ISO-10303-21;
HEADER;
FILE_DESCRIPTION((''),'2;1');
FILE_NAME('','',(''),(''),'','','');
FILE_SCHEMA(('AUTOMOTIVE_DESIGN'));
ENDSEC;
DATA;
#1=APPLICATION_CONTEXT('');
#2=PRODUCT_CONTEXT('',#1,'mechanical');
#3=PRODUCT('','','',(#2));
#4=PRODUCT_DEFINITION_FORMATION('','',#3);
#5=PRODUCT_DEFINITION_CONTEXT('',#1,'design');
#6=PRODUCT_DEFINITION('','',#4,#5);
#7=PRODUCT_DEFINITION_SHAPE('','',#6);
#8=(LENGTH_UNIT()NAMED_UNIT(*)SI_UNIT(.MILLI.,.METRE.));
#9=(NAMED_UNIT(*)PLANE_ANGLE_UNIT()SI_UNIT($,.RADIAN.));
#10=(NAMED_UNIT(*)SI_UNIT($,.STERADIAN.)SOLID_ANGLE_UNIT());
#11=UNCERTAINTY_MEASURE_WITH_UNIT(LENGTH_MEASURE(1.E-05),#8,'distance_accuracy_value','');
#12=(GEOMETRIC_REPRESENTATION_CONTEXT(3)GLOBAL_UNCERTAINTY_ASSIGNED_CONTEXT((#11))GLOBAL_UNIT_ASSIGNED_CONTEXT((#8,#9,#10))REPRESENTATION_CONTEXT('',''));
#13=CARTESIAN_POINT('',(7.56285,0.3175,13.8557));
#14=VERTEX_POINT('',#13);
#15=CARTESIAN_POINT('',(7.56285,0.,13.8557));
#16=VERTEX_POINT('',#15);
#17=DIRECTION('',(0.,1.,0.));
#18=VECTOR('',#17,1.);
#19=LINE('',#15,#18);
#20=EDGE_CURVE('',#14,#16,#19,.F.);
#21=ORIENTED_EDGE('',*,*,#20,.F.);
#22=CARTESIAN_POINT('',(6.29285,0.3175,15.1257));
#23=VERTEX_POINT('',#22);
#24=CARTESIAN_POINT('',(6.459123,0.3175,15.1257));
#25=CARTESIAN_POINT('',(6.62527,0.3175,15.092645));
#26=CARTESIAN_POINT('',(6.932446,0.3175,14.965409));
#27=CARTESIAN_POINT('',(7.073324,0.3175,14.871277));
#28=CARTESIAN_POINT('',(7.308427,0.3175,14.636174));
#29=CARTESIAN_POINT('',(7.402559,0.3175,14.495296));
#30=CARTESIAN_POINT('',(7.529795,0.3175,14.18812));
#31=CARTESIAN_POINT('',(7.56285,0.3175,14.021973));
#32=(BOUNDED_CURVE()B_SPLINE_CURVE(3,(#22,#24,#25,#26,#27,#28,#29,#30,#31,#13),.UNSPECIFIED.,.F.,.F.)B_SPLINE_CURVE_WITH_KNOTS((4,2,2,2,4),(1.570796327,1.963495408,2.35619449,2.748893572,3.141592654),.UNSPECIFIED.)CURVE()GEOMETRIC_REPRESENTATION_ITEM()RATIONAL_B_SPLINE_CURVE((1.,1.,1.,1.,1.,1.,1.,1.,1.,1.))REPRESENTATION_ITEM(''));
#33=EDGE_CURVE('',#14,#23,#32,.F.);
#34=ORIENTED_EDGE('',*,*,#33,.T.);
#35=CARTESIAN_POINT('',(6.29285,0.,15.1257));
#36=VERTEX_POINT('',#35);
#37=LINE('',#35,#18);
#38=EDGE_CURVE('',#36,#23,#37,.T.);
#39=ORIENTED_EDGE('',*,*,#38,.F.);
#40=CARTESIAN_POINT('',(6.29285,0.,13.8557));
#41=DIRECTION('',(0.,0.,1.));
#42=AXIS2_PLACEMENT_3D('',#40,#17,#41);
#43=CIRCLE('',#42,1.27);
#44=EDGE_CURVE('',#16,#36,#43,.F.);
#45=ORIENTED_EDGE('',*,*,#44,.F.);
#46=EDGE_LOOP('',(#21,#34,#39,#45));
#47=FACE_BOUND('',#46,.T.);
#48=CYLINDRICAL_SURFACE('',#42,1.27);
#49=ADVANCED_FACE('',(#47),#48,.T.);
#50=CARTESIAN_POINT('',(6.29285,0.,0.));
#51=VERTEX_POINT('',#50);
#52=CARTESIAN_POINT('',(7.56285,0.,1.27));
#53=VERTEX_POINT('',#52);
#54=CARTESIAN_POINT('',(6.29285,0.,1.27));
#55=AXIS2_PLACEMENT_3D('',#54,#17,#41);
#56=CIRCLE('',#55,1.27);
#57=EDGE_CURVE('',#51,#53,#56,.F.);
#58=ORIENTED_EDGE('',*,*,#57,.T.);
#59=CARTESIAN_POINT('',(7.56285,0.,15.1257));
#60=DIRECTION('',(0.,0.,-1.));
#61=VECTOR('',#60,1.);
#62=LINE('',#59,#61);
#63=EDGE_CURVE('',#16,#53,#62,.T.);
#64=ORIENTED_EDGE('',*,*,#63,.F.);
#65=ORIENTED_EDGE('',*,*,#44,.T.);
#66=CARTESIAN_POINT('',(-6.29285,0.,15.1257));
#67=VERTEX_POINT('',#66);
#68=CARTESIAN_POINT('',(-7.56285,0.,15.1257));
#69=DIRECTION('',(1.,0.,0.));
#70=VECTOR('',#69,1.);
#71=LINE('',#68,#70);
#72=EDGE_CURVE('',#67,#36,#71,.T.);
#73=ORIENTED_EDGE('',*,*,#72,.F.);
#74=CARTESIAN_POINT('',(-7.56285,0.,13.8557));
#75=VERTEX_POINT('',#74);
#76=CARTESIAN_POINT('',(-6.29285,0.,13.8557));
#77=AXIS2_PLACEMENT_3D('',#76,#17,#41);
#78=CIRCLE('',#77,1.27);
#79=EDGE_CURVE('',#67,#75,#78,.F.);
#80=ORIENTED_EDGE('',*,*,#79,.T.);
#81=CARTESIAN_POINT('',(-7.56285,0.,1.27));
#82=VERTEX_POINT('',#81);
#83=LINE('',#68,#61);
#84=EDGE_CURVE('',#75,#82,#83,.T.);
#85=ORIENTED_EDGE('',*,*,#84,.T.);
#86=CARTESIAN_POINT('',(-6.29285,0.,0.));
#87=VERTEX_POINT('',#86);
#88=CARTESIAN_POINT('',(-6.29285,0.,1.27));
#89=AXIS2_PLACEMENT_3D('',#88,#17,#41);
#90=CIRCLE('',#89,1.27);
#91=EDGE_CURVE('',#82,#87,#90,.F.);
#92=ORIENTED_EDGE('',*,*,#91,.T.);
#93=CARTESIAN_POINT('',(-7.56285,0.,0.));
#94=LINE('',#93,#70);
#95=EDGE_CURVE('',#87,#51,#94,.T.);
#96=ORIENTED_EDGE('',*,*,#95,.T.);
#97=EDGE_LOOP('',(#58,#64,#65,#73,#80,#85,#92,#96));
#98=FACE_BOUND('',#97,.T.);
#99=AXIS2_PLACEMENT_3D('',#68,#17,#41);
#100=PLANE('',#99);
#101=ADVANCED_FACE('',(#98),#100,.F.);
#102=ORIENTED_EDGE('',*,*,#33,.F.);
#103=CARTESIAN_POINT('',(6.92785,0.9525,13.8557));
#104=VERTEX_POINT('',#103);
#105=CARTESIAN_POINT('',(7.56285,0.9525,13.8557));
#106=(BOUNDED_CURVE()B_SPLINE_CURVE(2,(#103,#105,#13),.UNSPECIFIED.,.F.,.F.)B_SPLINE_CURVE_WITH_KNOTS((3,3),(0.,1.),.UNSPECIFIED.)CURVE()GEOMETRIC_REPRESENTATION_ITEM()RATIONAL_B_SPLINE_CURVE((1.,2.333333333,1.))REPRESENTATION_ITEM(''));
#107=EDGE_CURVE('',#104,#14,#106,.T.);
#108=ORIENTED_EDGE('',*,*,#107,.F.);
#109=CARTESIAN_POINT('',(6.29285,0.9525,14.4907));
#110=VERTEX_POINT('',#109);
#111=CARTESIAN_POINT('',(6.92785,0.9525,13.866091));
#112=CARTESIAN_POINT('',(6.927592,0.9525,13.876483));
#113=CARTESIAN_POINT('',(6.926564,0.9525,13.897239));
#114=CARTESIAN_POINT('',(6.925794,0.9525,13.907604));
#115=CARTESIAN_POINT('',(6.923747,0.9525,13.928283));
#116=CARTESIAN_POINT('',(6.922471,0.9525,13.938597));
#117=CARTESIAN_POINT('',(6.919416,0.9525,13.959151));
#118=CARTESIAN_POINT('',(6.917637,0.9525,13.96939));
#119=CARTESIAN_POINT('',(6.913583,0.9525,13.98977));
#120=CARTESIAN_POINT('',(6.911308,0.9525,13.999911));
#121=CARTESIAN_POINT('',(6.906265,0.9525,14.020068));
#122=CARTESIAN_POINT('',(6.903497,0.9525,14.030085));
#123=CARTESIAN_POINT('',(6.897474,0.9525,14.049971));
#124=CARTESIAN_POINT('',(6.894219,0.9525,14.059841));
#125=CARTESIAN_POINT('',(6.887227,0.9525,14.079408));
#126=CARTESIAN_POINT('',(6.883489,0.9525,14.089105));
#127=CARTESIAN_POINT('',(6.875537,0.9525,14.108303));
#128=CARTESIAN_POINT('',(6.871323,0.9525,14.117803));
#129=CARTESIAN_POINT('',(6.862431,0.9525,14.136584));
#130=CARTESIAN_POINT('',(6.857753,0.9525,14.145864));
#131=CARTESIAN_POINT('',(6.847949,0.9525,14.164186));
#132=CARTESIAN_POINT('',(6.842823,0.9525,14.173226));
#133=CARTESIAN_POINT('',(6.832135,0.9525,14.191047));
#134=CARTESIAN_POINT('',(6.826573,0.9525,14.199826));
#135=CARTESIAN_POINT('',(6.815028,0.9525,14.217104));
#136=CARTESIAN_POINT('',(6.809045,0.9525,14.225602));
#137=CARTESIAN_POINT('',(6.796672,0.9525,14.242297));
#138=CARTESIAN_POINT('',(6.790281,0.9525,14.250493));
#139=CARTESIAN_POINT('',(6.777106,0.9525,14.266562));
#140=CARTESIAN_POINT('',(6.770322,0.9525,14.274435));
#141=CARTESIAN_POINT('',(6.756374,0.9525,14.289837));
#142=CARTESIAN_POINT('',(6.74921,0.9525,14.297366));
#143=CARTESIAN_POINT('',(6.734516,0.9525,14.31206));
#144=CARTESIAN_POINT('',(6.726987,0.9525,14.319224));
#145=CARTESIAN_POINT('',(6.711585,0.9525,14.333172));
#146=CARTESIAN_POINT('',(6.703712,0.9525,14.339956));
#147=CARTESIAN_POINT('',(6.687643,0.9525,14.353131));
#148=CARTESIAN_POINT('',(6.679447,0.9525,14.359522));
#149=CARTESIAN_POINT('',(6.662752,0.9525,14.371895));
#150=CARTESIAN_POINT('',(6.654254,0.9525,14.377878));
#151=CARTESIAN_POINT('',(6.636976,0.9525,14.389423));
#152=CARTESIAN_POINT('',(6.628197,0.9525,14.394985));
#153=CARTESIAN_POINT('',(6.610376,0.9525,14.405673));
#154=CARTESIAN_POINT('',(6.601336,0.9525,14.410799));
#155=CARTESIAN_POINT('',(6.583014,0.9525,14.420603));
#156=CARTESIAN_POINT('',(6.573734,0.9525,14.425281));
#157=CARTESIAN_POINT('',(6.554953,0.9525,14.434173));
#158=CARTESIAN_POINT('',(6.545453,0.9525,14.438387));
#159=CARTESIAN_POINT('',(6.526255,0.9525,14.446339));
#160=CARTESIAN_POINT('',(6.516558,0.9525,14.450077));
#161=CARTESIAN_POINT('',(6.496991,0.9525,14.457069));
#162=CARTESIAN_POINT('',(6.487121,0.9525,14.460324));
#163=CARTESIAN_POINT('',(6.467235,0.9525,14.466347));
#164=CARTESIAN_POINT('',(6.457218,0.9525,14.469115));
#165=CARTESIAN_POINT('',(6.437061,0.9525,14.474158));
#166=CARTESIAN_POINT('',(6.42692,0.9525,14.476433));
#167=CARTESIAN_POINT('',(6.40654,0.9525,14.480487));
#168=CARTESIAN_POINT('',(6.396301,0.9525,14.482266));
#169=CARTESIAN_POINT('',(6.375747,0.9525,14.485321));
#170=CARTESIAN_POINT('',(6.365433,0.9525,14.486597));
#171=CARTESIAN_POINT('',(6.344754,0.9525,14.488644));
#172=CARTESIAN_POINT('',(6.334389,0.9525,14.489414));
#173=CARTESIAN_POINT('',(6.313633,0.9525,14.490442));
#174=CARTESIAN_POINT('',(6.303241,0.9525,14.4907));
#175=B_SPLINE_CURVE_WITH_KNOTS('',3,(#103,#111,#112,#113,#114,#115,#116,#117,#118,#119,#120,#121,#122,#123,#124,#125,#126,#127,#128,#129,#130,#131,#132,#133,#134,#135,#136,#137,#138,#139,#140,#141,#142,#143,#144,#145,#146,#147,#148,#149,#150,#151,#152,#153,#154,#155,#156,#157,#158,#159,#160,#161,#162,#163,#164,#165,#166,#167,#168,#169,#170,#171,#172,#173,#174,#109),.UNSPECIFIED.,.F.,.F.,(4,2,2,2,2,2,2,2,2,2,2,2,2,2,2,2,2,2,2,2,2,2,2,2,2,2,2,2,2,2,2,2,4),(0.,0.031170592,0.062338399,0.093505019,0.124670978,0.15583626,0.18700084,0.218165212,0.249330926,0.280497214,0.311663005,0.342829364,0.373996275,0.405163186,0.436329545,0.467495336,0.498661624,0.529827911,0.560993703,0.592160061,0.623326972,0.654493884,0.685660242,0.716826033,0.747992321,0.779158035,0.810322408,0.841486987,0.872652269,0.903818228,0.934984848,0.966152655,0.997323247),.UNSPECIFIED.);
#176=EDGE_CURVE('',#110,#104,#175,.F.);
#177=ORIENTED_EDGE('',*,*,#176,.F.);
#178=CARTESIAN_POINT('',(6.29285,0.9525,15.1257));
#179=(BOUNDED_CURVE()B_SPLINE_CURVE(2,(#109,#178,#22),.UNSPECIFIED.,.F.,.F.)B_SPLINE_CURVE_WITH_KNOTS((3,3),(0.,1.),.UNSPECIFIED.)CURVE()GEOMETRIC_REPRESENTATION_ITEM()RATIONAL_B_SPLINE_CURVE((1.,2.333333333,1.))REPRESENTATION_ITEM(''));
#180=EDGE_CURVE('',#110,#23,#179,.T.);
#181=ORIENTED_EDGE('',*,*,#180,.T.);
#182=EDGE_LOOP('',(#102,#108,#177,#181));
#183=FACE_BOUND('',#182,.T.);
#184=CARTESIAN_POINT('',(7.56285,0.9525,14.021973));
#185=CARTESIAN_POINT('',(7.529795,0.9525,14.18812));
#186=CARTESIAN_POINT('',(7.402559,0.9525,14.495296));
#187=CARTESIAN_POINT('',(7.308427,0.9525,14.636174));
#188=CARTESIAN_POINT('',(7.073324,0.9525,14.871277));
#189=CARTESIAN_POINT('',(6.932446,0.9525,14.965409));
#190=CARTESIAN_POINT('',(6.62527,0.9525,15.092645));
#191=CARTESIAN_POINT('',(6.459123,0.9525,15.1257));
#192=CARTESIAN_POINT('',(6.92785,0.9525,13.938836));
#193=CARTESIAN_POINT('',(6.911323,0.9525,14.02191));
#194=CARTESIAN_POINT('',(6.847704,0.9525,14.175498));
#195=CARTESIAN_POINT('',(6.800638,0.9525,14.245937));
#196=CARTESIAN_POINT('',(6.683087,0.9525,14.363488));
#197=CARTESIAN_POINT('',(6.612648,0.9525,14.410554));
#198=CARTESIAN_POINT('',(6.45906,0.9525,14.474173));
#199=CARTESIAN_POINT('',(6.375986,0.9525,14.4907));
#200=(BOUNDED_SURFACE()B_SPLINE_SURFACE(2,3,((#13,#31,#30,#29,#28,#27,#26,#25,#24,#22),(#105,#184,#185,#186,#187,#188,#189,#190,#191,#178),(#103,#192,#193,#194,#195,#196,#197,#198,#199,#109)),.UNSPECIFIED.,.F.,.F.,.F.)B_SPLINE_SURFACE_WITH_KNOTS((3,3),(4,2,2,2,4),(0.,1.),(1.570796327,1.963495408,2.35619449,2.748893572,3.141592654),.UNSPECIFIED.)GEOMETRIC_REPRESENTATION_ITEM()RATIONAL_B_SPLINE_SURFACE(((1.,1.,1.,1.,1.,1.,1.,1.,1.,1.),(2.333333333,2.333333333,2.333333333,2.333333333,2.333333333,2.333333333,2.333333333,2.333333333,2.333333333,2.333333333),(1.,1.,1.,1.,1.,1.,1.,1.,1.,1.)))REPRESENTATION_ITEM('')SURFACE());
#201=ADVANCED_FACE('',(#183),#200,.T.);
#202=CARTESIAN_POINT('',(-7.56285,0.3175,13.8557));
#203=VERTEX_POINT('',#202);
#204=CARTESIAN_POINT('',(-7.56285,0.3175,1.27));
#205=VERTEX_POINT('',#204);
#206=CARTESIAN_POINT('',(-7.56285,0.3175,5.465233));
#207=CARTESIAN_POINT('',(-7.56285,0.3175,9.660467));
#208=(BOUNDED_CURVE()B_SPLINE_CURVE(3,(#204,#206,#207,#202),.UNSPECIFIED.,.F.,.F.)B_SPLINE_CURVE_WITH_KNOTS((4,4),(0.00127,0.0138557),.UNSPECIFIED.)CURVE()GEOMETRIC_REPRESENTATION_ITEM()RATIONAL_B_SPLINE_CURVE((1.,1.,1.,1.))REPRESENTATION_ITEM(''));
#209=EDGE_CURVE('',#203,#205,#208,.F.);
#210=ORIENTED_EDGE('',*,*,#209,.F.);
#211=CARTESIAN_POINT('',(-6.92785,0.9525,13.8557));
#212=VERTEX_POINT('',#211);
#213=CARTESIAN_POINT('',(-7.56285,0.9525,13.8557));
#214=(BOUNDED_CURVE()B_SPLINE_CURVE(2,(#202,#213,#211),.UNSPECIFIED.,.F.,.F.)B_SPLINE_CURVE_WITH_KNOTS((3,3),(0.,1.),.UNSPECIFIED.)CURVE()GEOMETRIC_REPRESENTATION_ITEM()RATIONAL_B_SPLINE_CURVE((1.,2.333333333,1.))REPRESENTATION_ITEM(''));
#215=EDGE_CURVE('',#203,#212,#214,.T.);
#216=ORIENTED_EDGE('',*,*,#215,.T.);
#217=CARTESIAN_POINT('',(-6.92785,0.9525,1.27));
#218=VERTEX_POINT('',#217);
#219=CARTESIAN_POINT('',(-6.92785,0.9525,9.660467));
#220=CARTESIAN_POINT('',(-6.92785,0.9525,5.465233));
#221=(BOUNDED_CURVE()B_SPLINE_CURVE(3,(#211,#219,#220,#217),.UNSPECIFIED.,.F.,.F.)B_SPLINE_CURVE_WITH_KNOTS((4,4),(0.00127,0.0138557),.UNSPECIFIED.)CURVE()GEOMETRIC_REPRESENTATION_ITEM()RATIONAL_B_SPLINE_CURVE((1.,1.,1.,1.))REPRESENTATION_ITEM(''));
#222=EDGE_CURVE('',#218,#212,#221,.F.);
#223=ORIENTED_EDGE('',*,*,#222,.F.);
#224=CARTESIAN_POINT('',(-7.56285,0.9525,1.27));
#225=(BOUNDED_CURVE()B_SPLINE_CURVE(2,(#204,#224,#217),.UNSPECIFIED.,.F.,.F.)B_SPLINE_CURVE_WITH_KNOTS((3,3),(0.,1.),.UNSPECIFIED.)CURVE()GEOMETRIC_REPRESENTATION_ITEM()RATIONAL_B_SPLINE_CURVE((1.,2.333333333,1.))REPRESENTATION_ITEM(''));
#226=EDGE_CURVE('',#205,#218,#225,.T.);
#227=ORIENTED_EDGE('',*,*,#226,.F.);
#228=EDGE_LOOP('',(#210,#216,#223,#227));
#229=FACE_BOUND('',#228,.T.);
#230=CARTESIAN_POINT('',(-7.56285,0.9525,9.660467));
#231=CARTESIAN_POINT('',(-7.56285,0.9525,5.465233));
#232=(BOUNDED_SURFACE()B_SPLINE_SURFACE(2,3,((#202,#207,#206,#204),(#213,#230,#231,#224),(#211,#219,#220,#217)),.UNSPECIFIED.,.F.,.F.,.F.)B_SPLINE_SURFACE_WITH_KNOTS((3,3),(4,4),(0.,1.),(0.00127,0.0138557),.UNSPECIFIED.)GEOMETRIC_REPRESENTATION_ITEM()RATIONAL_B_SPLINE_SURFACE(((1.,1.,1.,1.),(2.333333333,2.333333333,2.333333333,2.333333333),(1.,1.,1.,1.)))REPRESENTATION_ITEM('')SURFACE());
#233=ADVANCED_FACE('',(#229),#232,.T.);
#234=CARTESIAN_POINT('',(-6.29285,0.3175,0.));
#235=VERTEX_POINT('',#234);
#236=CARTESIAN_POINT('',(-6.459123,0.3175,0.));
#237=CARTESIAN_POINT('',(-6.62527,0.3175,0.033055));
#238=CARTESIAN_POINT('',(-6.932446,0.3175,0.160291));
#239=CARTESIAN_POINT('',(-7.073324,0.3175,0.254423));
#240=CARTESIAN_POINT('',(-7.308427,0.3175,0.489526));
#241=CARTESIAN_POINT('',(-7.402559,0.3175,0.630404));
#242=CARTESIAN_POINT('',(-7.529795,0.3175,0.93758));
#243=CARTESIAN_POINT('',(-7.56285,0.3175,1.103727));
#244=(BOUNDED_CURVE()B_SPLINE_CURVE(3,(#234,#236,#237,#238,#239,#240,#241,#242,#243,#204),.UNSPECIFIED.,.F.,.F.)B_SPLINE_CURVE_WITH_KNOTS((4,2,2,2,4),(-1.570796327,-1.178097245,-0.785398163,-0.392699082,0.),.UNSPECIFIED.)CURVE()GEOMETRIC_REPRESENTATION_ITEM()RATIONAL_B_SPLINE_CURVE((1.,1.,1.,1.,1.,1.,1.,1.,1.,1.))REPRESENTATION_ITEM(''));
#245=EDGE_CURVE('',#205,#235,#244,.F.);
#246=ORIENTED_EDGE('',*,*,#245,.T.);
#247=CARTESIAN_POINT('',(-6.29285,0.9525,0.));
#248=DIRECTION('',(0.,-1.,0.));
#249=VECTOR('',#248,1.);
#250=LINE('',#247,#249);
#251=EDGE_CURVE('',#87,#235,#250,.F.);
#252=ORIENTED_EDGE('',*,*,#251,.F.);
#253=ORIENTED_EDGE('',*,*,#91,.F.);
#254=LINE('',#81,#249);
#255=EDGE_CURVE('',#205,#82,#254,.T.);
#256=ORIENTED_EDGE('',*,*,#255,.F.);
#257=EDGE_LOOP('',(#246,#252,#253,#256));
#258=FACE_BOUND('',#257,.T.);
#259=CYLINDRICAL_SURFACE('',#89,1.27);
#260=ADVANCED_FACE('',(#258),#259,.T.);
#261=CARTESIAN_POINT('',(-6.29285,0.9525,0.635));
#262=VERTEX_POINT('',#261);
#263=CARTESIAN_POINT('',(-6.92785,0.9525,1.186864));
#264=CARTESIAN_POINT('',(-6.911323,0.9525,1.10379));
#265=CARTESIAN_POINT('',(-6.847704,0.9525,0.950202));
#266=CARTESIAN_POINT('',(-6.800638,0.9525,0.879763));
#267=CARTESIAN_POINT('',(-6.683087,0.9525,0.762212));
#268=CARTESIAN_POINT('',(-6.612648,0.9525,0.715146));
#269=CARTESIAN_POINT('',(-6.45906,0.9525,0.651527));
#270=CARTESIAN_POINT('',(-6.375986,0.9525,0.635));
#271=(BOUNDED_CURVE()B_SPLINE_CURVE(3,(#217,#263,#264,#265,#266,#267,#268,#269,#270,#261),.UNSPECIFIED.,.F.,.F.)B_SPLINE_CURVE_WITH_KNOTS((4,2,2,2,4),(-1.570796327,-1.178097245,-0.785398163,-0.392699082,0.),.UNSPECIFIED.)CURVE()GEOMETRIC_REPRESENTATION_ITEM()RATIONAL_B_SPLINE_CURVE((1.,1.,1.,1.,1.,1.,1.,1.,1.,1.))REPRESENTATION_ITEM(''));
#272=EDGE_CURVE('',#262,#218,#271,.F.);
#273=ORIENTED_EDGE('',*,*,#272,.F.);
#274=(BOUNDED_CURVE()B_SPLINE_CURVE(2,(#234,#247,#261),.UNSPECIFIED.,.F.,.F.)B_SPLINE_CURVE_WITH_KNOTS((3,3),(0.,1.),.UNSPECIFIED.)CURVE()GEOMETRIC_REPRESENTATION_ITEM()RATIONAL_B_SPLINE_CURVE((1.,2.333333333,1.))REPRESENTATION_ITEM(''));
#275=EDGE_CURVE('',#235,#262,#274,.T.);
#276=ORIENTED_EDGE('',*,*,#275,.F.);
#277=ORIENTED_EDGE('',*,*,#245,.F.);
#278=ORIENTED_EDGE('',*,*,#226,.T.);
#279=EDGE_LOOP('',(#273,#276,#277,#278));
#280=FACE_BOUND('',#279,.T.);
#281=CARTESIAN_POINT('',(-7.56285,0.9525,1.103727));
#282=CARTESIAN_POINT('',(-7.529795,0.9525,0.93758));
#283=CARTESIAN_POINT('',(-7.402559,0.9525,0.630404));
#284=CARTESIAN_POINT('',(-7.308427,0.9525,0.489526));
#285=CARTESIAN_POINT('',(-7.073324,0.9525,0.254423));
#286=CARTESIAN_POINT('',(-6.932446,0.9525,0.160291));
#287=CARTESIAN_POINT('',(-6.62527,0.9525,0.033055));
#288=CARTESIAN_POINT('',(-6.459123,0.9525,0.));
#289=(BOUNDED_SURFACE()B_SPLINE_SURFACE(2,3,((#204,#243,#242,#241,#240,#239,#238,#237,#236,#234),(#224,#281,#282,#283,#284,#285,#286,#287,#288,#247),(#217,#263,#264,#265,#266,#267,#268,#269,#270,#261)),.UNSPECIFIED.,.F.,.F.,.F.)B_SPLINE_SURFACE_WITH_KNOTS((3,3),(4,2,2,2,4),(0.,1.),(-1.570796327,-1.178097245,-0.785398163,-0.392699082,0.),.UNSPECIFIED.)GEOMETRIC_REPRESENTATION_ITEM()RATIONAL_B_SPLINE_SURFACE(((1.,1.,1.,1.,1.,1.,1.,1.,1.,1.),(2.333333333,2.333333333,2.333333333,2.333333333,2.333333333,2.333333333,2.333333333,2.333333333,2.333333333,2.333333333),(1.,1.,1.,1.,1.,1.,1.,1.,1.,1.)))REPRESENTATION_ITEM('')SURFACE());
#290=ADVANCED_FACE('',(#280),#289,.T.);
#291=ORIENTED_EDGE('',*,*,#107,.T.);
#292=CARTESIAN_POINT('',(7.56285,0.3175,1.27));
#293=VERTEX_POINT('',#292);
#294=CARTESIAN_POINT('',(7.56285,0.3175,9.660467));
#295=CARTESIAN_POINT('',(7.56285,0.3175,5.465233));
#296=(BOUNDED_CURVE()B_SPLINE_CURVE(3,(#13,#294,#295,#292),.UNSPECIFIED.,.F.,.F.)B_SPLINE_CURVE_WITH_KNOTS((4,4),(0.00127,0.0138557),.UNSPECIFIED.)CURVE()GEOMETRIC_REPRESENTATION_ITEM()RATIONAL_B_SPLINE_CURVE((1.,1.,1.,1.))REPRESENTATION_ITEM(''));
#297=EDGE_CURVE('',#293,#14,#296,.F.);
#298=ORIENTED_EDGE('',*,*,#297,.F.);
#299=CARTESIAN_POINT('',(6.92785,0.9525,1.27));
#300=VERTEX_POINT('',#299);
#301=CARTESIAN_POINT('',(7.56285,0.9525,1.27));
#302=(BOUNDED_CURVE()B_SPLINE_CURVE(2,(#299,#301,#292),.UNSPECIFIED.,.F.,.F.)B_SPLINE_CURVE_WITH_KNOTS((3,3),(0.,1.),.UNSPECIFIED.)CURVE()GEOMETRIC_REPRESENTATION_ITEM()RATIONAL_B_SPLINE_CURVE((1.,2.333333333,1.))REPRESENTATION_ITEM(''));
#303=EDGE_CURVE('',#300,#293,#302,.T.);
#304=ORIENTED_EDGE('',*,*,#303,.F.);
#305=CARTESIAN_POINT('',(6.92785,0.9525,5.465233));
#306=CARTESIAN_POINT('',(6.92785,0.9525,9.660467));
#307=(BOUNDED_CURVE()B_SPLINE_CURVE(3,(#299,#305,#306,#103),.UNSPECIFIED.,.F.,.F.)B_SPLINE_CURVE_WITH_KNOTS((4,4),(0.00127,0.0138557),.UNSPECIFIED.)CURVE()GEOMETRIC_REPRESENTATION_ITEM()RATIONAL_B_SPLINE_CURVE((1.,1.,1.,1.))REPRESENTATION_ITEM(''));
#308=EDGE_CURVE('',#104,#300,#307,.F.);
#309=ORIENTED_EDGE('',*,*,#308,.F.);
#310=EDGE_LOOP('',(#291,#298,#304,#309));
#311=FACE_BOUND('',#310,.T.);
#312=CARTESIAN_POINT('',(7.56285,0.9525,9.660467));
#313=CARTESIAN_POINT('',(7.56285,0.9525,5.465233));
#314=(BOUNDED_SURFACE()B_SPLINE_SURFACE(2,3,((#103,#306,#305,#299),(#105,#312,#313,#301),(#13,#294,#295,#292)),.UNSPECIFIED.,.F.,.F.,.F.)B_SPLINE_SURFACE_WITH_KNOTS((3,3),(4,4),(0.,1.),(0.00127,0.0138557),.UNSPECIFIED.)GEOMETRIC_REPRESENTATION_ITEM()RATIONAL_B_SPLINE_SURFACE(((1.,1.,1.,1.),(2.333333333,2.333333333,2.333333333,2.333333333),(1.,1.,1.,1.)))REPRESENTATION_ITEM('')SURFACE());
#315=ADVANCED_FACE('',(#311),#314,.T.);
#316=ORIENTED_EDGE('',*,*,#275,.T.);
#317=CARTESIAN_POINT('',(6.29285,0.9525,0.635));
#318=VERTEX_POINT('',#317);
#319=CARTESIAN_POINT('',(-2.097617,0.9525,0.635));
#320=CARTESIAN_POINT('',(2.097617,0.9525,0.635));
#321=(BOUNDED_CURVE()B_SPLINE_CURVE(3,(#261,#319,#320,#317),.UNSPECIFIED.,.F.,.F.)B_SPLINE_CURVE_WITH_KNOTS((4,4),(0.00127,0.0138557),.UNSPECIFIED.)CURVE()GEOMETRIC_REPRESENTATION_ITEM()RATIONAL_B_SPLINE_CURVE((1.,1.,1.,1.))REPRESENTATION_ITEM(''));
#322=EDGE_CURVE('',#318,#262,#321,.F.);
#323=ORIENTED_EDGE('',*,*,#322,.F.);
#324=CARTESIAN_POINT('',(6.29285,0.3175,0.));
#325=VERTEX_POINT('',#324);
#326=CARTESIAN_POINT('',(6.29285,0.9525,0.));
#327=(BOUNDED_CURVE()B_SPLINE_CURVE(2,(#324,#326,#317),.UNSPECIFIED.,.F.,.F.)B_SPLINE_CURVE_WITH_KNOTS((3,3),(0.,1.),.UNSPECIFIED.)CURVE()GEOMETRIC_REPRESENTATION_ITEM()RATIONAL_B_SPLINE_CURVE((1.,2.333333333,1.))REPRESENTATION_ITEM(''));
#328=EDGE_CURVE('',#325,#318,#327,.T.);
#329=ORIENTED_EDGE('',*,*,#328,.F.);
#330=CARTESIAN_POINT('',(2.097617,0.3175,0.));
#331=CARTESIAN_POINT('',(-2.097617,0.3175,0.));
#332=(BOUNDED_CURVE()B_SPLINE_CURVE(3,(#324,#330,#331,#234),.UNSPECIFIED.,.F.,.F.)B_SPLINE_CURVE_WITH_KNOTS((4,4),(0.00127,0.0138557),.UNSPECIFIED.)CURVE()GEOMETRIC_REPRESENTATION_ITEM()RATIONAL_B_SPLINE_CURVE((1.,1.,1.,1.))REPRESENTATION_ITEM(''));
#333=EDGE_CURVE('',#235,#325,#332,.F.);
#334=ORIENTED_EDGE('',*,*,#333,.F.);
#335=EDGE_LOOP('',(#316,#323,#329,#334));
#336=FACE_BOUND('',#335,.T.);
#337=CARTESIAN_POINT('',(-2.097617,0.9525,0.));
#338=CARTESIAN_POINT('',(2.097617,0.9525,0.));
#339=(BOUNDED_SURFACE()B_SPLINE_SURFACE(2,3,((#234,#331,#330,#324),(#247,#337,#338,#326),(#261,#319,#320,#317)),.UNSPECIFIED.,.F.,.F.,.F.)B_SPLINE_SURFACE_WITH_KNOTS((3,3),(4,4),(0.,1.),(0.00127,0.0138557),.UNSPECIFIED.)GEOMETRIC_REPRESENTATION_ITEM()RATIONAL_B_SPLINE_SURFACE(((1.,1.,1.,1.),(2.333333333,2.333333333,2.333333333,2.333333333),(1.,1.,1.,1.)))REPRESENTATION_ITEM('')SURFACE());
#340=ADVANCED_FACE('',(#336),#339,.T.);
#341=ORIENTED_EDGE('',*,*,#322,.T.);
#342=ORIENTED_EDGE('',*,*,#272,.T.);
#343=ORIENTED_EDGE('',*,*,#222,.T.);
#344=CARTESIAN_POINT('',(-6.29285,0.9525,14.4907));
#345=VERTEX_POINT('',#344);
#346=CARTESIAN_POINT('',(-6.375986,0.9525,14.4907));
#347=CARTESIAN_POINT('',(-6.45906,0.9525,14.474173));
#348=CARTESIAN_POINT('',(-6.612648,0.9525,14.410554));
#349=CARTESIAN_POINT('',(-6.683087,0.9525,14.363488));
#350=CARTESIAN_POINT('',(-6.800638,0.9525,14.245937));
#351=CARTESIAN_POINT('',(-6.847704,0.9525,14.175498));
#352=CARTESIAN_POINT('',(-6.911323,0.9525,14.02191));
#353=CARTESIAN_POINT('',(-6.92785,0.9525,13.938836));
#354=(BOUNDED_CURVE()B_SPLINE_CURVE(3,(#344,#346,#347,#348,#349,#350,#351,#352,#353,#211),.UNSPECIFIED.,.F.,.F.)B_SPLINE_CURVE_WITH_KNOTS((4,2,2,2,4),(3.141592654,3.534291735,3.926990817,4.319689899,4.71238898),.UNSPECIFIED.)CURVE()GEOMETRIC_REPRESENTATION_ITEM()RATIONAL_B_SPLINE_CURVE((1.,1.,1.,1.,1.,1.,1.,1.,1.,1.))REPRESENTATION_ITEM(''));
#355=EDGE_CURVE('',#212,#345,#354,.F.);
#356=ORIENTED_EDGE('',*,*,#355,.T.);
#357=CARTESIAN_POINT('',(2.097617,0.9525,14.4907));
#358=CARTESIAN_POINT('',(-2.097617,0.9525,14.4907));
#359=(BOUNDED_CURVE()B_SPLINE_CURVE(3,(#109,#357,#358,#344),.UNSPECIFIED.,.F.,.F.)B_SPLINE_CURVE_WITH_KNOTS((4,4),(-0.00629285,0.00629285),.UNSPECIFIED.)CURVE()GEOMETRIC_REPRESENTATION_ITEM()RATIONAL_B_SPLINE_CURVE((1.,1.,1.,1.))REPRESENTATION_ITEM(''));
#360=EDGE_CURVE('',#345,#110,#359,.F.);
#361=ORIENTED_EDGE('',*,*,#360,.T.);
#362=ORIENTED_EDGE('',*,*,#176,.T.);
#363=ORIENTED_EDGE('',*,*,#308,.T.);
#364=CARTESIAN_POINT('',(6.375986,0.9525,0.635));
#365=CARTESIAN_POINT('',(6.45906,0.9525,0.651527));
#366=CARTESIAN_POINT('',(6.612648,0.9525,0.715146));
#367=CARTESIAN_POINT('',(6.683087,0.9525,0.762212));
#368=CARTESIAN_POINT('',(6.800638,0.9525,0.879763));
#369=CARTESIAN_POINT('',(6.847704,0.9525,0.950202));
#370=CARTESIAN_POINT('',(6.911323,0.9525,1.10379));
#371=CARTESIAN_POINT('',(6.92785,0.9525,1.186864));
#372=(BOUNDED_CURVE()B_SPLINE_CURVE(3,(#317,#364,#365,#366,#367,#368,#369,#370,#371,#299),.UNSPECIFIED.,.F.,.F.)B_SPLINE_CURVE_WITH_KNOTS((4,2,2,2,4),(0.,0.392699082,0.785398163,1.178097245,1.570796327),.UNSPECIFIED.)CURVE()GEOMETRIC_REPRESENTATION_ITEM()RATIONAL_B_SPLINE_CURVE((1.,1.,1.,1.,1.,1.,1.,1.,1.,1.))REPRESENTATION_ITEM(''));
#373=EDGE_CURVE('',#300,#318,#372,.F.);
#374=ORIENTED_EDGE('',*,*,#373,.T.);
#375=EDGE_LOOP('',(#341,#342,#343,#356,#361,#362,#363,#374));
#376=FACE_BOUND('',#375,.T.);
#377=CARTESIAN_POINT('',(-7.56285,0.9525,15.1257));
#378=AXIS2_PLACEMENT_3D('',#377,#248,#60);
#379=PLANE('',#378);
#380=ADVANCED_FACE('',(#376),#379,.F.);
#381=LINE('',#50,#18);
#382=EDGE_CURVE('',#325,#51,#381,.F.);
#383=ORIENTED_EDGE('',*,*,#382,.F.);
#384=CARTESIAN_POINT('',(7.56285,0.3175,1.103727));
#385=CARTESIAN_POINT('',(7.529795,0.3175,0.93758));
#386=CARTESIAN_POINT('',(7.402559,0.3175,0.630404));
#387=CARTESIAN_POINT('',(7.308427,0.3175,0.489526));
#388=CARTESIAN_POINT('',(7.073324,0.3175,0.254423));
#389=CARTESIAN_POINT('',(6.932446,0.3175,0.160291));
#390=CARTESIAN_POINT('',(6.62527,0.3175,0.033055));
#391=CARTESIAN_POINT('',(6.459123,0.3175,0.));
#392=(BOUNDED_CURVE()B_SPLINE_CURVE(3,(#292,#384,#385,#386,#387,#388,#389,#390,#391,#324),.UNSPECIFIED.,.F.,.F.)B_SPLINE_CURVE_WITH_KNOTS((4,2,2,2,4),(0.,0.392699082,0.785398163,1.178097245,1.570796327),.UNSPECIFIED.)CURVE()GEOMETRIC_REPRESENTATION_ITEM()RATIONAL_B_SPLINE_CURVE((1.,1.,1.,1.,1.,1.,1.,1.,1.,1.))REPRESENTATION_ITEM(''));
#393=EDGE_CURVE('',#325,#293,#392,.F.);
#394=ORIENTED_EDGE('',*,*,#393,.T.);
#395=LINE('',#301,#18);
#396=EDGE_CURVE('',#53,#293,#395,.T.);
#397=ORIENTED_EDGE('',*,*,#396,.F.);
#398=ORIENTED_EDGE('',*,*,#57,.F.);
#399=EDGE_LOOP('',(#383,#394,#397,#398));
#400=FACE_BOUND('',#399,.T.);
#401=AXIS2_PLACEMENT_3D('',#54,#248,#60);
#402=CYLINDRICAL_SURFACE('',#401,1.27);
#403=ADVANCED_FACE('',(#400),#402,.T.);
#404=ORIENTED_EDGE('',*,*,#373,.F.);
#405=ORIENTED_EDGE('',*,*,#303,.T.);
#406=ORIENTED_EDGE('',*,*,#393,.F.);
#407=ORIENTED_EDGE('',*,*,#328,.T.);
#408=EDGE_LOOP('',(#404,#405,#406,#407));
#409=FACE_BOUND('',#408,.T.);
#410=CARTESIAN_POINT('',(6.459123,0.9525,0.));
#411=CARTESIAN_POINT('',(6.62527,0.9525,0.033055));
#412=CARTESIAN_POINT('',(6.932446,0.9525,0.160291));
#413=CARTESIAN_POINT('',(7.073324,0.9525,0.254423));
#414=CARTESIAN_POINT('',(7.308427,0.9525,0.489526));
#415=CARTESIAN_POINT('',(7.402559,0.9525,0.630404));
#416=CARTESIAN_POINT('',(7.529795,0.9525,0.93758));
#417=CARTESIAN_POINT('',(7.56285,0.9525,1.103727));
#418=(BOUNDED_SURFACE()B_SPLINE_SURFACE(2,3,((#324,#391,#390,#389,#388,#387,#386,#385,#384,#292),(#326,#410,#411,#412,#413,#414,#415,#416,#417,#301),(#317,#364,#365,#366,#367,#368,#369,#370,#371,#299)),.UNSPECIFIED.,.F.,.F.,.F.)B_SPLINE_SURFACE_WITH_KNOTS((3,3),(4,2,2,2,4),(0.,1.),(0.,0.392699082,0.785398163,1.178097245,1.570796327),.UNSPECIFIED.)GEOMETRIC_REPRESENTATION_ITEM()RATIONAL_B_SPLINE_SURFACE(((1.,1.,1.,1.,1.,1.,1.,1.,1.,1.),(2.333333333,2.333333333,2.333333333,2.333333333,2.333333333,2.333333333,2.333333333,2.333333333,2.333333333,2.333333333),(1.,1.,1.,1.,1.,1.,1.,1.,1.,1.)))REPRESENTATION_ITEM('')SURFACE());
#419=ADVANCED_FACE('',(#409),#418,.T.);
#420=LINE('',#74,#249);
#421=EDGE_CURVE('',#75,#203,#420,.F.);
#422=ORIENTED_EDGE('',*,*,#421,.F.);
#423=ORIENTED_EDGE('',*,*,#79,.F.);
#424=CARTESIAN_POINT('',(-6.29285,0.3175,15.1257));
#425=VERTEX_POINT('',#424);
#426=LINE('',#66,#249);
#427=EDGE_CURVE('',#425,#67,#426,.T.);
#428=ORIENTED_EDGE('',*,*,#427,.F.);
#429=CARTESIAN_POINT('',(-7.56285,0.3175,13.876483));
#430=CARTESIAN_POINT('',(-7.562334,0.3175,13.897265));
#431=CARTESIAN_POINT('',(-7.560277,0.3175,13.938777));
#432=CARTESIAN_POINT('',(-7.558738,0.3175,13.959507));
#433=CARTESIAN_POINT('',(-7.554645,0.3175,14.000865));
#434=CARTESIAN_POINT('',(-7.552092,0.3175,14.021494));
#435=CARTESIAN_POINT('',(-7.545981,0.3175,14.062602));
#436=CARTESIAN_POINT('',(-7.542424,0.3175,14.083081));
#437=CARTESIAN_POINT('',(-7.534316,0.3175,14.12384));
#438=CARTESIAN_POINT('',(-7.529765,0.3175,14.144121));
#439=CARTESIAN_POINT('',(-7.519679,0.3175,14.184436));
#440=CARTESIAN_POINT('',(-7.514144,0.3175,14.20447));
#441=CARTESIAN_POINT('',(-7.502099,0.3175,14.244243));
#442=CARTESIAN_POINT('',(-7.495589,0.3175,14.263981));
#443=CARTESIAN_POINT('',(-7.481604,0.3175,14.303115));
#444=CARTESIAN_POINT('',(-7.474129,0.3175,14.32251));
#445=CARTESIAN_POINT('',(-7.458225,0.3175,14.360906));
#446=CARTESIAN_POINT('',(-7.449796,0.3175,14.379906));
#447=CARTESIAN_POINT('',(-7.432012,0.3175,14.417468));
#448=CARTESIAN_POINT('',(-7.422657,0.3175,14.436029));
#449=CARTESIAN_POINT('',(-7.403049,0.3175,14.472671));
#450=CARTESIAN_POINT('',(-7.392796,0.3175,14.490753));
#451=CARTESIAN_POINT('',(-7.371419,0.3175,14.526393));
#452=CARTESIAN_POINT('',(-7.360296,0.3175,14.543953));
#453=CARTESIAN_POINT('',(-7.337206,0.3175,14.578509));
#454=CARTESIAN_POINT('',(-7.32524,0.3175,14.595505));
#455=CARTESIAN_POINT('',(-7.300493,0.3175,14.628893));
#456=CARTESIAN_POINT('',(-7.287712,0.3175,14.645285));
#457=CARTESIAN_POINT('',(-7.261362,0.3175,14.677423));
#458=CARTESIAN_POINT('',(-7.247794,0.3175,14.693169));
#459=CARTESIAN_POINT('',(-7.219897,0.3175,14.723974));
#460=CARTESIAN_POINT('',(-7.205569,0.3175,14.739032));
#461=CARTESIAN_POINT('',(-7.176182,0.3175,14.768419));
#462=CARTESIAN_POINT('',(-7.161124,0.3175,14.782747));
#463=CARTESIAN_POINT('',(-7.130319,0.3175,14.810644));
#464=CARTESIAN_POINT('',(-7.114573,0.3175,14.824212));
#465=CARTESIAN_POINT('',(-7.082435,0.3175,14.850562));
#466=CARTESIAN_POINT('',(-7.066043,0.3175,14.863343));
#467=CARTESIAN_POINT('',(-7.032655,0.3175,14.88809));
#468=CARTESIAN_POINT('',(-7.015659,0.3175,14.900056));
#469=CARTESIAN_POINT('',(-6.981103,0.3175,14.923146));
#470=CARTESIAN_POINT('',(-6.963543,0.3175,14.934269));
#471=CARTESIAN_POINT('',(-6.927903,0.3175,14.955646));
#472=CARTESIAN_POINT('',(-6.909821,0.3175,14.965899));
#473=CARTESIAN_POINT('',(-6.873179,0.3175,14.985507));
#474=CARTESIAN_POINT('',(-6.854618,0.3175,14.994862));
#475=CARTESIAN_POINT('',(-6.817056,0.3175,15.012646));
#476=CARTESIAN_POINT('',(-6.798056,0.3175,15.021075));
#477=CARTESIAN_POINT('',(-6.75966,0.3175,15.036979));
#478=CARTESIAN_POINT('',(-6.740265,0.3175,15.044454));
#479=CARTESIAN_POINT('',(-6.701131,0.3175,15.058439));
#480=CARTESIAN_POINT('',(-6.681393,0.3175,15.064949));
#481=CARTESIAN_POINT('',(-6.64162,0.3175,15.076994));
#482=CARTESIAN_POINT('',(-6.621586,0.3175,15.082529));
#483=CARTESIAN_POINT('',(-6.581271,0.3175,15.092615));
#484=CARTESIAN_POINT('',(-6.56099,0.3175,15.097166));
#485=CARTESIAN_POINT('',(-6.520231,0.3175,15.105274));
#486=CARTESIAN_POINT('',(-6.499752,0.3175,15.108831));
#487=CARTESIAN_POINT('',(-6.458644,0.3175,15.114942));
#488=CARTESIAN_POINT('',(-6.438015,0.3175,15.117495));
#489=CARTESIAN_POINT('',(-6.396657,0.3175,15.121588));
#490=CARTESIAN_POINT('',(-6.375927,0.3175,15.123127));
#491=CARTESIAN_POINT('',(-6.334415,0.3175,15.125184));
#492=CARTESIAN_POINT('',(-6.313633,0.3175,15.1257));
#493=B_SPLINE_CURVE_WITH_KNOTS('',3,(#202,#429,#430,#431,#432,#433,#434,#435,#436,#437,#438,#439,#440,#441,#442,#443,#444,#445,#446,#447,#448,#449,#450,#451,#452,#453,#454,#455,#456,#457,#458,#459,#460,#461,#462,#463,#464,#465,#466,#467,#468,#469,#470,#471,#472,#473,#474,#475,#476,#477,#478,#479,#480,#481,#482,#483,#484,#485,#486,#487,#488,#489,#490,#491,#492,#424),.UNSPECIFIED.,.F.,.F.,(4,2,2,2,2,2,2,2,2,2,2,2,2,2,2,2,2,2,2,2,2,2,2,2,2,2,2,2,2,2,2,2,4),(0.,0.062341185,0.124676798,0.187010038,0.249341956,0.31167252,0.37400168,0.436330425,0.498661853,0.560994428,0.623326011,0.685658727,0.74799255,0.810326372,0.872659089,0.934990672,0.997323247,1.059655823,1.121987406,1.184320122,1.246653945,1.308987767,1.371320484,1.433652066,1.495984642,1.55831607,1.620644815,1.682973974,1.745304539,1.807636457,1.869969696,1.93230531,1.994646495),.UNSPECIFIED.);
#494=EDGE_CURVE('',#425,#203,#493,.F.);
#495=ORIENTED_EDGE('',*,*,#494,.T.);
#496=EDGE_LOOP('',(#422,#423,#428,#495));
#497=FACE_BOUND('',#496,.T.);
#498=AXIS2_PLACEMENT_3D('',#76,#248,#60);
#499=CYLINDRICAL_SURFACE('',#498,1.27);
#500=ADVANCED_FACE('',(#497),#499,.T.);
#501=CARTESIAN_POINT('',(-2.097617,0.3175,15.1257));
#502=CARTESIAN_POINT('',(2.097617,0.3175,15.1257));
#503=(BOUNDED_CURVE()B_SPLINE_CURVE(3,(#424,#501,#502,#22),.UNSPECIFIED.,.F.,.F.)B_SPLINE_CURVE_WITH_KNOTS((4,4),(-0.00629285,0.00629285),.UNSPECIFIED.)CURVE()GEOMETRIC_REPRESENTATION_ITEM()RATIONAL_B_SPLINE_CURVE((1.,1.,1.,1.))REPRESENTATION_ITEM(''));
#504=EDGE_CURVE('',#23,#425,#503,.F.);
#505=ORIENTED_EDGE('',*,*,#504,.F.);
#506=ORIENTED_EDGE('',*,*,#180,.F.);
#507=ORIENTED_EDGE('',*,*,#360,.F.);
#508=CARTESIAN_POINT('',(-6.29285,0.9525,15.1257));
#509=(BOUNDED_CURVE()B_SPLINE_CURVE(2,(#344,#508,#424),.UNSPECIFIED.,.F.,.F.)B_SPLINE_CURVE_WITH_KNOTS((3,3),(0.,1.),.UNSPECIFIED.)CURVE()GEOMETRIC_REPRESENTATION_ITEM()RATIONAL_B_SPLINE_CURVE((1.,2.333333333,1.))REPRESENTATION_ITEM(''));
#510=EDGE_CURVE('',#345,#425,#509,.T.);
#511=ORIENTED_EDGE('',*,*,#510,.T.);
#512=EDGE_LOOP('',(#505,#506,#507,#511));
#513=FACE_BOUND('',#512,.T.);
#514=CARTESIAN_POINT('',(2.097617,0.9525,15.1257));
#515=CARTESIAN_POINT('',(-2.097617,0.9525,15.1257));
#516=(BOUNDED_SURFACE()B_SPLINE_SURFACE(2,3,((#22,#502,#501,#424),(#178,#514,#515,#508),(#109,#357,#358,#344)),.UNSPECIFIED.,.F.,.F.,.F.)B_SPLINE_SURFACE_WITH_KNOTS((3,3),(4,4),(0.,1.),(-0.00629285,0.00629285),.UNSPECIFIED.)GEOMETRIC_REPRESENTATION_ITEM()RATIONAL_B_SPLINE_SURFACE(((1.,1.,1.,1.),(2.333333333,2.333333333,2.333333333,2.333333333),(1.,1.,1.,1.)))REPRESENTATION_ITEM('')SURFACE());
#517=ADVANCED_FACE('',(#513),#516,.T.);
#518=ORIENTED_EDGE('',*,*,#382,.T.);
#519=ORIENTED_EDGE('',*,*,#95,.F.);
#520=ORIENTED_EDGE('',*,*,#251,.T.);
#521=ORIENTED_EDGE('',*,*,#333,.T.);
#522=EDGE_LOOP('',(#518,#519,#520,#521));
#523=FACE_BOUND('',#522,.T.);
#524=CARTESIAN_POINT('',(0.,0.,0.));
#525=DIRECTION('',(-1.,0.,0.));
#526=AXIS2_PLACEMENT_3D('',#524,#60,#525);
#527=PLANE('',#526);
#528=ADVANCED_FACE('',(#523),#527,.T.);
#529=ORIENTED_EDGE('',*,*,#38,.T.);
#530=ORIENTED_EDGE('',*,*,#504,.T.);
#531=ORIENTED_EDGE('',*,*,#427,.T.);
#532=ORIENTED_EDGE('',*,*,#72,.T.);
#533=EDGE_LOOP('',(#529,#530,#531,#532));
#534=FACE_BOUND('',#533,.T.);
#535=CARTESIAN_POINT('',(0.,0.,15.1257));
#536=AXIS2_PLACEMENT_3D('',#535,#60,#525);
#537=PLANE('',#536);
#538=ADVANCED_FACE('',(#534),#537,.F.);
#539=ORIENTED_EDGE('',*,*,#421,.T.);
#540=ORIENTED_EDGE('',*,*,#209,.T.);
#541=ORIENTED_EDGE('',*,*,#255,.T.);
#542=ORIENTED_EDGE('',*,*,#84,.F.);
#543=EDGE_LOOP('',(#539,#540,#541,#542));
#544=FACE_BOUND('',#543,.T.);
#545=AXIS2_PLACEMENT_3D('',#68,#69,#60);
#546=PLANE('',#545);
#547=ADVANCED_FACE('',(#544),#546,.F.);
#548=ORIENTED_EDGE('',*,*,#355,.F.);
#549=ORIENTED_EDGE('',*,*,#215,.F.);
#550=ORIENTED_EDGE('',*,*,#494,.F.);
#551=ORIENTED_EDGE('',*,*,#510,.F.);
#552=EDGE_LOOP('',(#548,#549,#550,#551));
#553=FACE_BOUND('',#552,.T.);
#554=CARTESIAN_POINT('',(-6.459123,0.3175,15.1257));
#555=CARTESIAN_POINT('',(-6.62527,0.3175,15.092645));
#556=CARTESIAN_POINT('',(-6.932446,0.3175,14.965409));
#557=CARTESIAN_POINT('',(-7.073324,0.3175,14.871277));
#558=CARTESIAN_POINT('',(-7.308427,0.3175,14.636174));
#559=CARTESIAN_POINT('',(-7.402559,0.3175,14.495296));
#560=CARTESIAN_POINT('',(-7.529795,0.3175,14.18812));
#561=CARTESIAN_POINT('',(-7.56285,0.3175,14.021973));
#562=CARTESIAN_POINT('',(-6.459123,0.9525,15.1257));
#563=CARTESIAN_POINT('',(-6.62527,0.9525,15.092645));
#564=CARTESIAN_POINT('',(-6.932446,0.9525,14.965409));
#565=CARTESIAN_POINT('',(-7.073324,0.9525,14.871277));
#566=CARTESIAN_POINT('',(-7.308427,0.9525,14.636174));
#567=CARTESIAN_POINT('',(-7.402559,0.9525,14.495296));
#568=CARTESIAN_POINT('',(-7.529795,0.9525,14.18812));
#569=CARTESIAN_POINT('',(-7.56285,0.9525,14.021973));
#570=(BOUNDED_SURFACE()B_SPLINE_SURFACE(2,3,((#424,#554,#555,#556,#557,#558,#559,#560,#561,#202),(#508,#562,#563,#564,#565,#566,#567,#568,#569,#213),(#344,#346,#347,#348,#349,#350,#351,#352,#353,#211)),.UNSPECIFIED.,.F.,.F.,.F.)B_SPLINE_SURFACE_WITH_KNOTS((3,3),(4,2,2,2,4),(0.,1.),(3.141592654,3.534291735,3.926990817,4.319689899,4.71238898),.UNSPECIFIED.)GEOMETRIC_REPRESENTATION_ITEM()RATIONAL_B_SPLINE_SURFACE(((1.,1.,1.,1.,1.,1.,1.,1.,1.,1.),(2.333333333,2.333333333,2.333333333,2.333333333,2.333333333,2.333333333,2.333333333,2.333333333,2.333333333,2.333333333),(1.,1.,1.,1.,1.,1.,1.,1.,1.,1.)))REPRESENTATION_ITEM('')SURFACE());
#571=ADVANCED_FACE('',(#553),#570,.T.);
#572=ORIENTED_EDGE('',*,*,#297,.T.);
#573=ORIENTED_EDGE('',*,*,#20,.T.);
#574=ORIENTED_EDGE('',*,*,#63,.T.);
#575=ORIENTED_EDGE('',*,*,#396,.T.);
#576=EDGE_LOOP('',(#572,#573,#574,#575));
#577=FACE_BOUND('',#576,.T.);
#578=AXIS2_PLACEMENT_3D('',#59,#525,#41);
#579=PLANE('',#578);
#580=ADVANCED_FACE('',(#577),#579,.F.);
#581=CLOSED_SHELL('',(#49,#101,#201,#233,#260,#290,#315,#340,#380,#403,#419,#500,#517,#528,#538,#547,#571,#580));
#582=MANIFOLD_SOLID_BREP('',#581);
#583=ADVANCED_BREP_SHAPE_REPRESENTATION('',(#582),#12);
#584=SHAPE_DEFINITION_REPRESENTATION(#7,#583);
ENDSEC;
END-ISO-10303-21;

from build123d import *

# Parameters (mm, degrees)
SKETCH1_W           = 15.1257
SKETCH1_H           = 0.9525
BOSS_EXTRUDE1_DEPTH = 15.1257
FILLET3_R           = 1.27
FILLET1_SIZE        = 0.635


with BuildPart() as part:
    # Sketch1 → Boss-Extrude1 (new body)
    with BuildSketch(Plane.XY):
        with Locations((0, 0.47625)):
            Rectangle(SKETCH1_W, SKETCH1_H)
    extrude(amount=BOSS_EXTRUDE1_DEPTH)

    # Fillet3
    fillet3_edges = [part.edges().sort_by_distance(p)[0] for p in [
        (7.56285, 0.47625, 15.1257),
        (-7.56285, 0.47625, 15.1257),
        (7.56285, 0.47625, 0),
        (-7.56285, 0.47625, 0),
    ]]
    fillet(fillet3_edges, radius=FILLET3_R)

    # Fillet1
    # a fillet whose section is not a circle: 0.635 mm, written as the material it takes off along each edge
    with BuildSketch(Plane(origin=(7.56285, 0.9525, 1.27), x_dir=(0, -1, 0), z_dir=(0, 0, 1)), Plane(origin=(6.29285, 0.9525, 15.1257), x_dir=(0, -1, 0), z_dir=(-1, 0, 0))) as fillet1_piece_1:
        with BuildLine():
            Bezier((FILLET1_SIZE, 0), (0, 0), (0, -FILLET1_SIZE), weights=[1, 2.333333333, 1])
            Line((0, -FILLET1_SIZE), (-FILLET1_SIZE * 0.02, -FILLET1_SIZE))
            Line((-FILLET1_SIZE * 0.02, -FILLET1_SIZE), (-FILLET1_SIZE * 0.02, FILLET1_SIZE * 0.02))
            Line((-FILLET1_SIZE * 0.02, FILLET1_SIZE * 0.02), (FILLET1_SIZE, FILLET1_SIZE * 0.02))
            Line((FILLET1_SIZE, FILLET1_SIZE * 0.02), (FILLET1_SIZE, 0))
        make_face()
    extrude(amount=12.5857, mode=Mode.SUBTRACT)
    with BuildSketch(Plane(origin=(-7.56285, 0.9525, 1.27), x_dir=(0, -1, 0), z_dir=(0, 0, 1)), Plane(origin=(6.29285, 0.9525, 0), x_dir=(0, -1, 0), z_dir=(-1, 0, 0))) as fillet1_piece_2:
        with BuildLine():
            Bezier((FILLET1_SIZE, 0), (0, 0), (0, FILLET1_SIZE), weights=[1, 2.333333333, 1])
            Line((0, FILLET1_SIZE), (-FILLET1_SIZE * 0.02, FILLET1_SIZE))
            Line((-FILLET1_SIZE * 0.02, FILLET1_SIZE), (-FILLET1_SIZE * 0.02, -FILLET1_SIZE * 0.02))
            Line((-FILLET1_SIZE * 0.02, -FILLET1_SIZE * 0.02), (FILLET1_SIZE, -FILLET1_SIZE * 0.02))
            Line((FILLET1_SIZE, -FILLET1_SIZE * 0.02), (FILLET1_SIZE, 0))
        make_face()
    extrude(amount=12.5857, mode=Mode.SUBTRACT)
    with BuildSketch(Plane(origin=(6.29285, 0.9525, 1.27), x_dir=(1, 0, 0), z_dir=(0, 0, 1))) as fillet1_piece_3:
        with BuildLine():
            Bezier((1.27, -FILLET1_SIZE), (1.27, 0), (1.27 - FILLET1_SIZE, 0), weights=[1, 2.333333333, 1])
            Line((1.27 - FILLET1_SIZE, 0), (1.27 - FILLET1_SIZE, FILLET1_SIZE * 0.02))
            Line((1.27 - FILLET1_SIZE, FILLET1_SIZE * 0.02), (1.27 + FILLET1_SIZE * 0.02, FILLET1_SIZE * 0.02))
            Line((1.27 + FILLET1_SIZE * 0.02, FILLET1_SIZE * 0.02), (1.27 + FILLET1_SIZE * 0.02, -FILLET1_SIZE))
            Line((1.27 + FILLET1_SIZE * 0.02, -FILLET1_SIZE), (1.27, -FILLET1_SIZE))
        make_face()
    revolve(axis=Axis((6.29285, 0.9525, 1.27), (0, 1, 0)), revolution_arc=90, mode=Mode.SUBTRACT)
    with BuildSketch(Plane(origin=(6.29285, 0.9525, 13.8557), x_dir=(1, 0, 0), z_dir=(0, 0, -1))) as fillet1_piece_4:
        with BuildLine():
            Bezier((1.27, FILLET1_SIZE), (1.27, 0), (1.27 - FILLET1_SIZE, 0), weights=[1, 2.333333333, 1])
            Line((1.27 - FILLET1_SIZE, 0), (1.27 - FILLET1_SIZE, -FILLET1_SIZE * 0.02))
            Line((1.27 - FILLET1_SIZE, -FILLET1_SIZE * 0.02), (1.27 + FILLET1_SIZE * 0.02, -FILLET1_SIZE * 0.02))
            Line((1.27 + FILLET1_SIZE * 0.02, -FILLET1_SIZE * 0.02), (1.27 + FILLET1_SIZE * 0.02, FILLET1_SIZE))
            Line((1.27 + FILLET1_SIZE * 0.02, FILLET1_SIZE), (1.27, FILLET1_SIZE))
        make_face()
    revolve(axis=Axis((6.29285, 0.9525, 13.8557), (0, -1, 0)), revolution_arc=90, mode=Mode.SUBTRACT)
    with BuildSketch(Plane(origin=(-6.29285, 0.9525, 13.8557), x_dir=(-1, 0, 0), z_dir=(0, 0, -1))) as fillet1_piece_5:
        with BuildLine():
            Bezier((1.27, -FILLET1_SIZE), (1.27, 0), (1.27 - FILLET1_SIZE, 0), weights=[1, 2.333333333, 1])
            Line((1.27 - FILLET1_SIZE, 0), (1.27 - FILLET1_SIZE, FILLET1_SIZE * 0.02))
            Line((1.27 - FILLET1_SIZE, FILLET1_SIZE * 0.02), (1.27 + FILLET1_SIZE * 0.02, FILLET1_SIZE * 0.02))
            Line((1.27 + FILLET1_SIZE * 0.02, FILLET1_SIZE * 0.02), (1.27 + FILLET1_SIZE * 0.02, -FILLET1_SIZE))
            Line((1.27 + FILLET1_SIZE * 0.02, -FILLET1_SIZE), (1.27, -FILLET1_SIZE))
        make_face()
    revolve(axis=Axis((-6.29285, 0.9525, 13.8557), (0, 1, 0)), revolution_arc=90, mode=Mode.SUBTRACT)
    with BuildSketch(Plane(origin=(-6.29285, 0.9525, 1.27), x_dir=(-1, 0, 0), z_dir=(0, 0, 1))) as fillet1_piece_6:
        with BuildLine():
            Bezier((1.27, FILLET1_SIZE), (1.27, 0), (1.27 - FILLET1_SIZE, 0), weights=[1, 2.333333333, 1])
            Line((1.27 - FILLET1_SIZE, 0), (1.27 - FILLET1_SIZE, -FILLET1_SIZE * 0.02))
            Line((1.27 - FILLET1_SIZE, -FILLET1_SIZE * 0.02), (1.27 + FILLET1_SIZE * 0.02, -FILLET1_SIZE * 0.02))
            Line((1.27 + FILLET1_SIZE * 0.02, -FILLET1_SIZE * 0.02), (1.27 + FILLET1_SIZE * 0.02, FILLET1_SIZE))
            Line((1.27 + FILLET1_SIZE * 0.02, FILLET1_SIZE), (1.27, FILLET1_SIZE))
        make_face()
    revolve(axis=Axis((-6.29285, 0.9525, 1.27), (0, -1, 0)), revolution_arc=90, mode=Mode.SUBTRACT)


solid = part.part
